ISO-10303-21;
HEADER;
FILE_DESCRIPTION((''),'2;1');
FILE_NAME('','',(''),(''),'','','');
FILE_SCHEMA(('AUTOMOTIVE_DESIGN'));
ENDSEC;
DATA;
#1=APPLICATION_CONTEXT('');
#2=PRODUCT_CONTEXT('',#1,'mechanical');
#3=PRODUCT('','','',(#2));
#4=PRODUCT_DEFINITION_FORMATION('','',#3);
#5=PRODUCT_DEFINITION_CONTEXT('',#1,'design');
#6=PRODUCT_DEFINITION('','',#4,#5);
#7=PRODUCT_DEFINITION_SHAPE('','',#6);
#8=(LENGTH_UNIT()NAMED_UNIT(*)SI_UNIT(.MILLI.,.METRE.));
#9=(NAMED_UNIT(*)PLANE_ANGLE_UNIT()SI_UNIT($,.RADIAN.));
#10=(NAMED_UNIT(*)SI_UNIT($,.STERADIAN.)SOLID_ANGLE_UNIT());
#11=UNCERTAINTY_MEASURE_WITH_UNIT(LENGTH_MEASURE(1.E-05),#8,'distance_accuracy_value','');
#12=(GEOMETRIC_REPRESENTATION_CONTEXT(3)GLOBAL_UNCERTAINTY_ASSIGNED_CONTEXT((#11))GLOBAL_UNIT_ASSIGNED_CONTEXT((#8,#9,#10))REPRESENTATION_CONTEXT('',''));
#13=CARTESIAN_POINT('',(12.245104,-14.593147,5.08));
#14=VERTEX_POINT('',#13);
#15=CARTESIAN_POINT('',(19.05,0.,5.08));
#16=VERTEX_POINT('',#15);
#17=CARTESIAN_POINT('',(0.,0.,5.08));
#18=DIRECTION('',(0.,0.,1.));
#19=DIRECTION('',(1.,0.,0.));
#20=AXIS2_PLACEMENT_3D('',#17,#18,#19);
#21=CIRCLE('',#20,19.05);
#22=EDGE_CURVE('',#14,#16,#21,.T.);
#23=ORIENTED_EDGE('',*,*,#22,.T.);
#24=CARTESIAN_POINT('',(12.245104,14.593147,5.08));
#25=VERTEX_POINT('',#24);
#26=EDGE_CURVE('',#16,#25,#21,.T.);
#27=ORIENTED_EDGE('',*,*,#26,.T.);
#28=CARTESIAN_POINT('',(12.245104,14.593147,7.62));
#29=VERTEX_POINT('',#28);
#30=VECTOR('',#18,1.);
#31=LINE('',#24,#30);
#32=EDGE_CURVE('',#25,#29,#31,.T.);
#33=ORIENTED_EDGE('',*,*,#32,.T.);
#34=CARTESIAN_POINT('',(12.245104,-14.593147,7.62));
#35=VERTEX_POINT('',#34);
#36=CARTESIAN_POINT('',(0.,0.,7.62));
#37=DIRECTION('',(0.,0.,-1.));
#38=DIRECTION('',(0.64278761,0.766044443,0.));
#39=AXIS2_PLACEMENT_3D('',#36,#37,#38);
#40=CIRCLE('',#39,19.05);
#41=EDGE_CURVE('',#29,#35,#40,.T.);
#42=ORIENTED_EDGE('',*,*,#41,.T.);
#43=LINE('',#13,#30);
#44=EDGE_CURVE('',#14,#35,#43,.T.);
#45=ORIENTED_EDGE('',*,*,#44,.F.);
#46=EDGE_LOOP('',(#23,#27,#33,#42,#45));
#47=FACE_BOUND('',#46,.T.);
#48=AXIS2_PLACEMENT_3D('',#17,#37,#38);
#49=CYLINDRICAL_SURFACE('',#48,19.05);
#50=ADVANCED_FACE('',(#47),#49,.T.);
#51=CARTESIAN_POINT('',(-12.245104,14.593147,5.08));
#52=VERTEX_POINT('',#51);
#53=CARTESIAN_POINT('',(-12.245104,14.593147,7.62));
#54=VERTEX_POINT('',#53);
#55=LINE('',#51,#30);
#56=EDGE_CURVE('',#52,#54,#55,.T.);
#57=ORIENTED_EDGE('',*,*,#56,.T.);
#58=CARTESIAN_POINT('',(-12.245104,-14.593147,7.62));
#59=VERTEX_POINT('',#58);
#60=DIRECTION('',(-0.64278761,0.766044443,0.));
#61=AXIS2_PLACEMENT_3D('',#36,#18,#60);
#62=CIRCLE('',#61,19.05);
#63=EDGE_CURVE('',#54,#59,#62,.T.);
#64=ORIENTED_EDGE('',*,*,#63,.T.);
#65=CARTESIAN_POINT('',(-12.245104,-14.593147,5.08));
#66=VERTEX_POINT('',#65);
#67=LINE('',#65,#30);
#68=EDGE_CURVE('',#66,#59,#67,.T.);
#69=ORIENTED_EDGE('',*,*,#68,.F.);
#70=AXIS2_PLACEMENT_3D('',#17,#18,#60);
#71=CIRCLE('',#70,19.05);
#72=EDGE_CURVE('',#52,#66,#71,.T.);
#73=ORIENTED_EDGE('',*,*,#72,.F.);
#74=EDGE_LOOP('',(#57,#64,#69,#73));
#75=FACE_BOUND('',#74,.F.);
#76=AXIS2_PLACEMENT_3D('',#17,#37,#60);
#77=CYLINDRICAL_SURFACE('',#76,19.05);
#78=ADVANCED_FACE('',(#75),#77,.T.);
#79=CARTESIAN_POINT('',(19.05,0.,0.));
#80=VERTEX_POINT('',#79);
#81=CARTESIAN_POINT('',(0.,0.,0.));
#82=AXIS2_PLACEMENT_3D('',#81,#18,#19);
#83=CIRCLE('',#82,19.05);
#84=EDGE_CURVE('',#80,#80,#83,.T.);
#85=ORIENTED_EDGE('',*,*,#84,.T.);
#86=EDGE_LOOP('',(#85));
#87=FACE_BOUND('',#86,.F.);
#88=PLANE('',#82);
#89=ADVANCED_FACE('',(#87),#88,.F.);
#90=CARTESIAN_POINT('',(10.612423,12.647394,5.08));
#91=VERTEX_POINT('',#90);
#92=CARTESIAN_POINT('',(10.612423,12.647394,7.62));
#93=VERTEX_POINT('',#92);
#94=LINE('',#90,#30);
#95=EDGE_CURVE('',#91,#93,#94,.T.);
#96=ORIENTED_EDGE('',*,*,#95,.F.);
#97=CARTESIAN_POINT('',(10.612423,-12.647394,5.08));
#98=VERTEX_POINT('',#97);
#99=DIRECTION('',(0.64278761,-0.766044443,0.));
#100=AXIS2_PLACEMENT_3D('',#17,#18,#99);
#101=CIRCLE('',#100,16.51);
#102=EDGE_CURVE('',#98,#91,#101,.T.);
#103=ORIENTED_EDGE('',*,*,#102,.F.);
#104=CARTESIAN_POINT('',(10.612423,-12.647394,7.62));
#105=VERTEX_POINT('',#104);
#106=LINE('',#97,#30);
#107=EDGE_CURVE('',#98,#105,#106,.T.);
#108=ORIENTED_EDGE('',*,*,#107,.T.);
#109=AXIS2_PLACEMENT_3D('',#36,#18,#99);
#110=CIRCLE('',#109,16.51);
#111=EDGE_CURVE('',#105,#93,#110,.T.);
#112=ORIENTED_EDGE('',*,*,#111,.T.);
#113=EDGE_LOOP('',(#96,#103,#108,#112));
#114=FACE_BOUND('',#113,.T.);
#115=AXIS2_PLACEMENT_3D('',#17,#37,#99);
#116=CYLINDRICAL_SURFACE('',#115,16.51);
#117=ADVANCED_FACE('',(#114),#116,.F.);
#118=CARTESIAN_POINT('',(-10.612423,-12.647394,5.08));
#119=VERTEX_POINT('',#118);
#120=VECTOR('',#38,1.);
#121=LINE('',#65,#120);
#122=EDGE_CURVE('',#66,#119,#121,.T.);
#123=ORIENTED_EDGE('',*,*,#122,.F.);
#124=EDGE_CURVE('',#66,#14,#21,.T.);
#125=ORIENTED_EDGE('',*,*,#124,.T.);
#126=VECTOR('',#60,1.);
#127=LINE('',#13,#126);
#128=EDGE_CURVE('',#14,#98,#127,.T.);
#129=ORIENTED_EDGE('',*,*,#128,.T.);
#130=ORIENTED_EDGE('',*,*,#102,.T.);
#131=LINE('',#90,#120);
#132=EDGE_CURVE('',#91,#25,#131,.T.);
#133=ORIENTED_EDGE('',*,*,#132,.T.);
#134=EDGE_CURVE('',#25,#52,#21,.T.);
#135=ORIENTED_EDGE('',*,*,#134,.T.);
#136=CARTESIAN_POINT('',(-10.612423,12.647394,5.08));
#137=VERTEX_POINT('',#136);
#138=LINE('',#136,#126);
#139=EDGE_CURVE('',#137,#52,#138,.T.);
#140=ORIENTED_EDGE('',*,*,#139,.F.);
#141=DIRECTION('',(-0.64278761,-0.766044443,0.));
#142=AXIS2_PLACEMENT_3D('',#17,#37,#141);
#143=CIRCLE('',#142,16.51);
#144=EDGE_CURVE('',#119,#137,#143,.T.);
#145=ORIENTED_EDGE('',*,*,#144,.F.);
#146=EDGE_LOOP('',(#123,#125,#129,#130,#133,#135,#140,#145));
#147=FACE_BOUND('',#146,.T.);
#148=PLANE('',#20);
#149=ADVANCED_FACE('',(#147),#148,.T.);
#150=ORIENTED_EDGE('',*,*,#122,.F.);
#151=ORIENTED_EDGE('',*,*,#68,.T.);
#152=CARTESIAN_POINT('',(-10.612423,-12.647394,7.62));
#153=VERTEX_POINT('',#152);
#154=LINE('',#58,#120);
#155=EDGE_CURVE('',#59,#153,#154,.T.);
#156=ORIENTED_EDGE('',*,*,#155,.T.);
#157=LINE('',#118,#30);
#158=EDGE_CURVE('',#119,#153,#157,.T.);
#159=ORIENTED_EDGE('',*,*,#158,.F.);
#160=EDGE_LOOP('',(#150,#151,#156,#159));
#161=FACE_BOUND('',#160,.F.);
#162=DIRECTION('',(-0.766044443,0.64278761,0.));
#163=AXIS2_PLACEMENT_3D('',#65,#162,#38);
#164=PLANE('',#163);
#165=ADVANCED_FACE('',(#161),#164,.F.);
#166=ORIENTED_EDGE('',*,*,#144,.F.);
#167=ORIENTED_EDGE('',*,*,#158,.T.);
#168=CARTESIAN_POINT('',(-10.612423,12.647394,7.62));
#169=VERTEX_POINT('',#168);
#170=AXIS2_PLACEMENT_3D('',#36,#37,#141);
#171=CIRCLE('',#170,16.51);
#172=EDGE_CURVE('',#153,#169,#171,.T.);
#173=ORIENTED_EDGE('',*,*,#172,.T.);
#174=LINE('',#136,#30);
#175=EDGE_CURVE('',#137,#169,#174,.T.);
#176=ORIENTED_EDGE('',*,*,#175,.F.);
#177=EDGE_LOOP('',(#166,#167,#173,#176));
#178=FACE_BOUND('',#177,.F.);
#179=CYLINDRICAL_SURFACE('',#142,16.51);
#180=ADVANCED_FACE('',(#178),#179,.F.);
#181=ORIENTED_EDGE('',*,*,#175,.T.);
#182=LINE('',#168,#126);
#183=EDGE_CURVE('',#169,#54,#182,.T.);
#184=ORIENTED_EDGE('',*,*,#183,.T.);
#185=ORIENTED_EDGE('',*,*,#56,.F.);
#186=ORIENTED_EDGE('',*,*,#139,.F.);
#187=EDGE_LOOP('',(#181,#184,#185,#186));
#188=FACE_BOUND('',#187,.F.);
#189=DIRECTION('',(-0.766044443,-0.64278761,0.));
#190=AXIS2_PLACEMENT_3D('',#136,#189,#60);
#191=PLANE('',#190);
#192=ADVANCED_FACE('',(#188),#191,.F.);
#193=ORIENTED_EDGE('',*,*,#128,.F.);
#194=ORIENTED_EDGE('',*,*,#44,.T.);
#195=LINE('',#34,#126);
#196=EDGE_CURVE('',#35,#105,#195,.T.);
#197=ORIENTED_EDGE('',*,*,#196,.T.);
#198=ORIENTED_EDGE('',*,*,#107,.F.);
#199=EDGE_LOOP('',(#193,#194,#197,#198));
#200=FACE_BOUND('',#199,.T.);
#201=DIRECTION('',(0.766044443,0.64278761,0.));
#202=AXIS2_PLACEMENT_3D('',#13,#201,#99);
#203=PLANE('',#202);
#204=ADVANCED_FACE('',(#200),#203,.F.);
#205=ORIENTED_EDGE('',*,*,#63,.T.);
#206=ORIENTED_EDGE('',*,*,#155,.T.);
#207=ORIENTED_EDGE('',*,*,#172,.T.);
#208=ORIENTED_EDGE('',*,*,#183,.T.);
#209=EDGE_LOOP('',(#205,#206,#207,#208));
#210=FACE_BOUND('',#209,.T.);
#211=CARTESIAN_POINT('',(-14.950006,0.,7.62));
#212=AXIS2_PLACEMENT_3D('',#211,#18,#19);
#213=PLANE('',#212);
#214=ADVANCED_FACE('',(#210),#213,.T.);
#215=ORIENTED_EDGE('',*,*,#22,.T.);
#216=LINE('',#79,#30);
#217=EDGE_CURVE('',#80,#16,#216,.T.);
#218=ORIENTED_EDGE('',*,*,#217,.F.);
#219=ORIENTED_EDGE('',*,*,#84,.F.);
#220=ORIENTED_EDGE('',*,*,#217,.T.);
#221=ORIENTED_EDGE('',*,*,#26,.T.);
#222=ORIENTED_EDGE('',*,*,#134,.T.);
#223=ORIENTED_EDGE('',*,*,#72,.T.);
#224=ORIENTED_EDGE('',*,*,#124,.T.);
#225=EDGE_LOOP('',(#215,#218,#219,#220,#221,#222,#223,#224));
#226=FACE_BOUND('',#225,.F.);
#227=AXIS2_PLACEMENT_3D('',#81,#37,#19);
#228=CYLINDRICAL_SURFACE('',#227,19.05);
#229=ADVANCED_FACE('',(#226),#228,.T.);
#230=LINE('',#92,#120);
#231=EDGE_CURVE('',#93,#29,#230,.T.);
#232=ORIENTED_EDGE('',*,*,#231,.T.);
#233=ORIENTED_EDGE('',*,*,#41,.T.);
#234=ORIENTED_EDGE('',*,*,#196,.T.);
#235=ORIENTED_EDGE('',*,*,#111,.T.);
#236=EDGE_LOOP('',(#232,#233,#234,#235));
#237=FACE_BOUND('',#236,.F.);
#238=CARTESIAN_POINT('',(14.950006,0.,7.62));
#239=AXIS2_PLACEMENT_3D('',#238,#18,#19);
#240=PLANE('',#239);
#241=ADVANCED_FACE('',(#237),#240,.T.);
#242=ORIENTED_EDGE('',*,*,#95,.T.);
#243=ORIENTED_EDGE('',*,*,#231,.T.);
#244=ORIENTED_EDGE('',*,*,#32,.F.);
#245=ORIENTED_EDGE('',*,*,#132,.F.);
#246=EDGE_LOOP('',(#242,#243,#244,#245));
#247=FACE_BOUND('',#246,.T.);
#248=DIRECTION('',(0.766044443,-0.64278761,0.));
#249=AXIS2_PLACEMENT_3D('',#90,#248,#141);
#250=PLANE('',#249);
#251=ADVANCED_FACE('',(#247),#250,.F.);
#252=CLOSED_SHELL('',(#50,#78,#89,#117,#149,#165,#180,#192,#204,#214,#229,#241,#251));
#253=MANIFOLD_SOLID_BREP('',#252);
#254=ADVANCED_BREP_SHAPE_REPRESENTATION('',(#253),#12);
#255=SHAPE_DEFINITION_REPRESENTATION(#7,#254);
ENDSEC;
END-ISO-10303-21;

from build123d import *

# Parameters (mm, degrees)
F0_R     = 19.05
F1_DEPTH = 5.08
F3_DEPTH = 2.54


# Not quite as in the source:
# - a pattern or mirror of a feature is missing from the dataset's text; its kind, count and spacing are read off the source's solid


with BuildPart() as f1:
    # F0 (on Top) → F1 (new body)
    with BuildSketch(Plane.XY):
        Circle(F0_R)
    extrude(amount=F1_DEPTH)

    # F2 (on face) → F3 (join)
    with BuildSketch(Plane.XY.offset(5.08)):
        with BuildLine():
            ThreePointArc((-10.6124234359, -12.6473937559), (-16.51, 0), (-10.6124234359, 12.6473937559))
            Line((-10.6124234359, 12.6473937559), (-12.2451039645, 14.5931466414))
            ThreePointArc((-12.2451039645, 14.5931466414), (-19.05, 0), (-12.2451039645, -14.5931466414))
            Line((-12.2451039645, -14.5931466414), (-10.6124234359, -12.6473937559))
        make_face()
    f3 = extrude(amount=F3_DEPTH)

    # F3_copies: F3 across plane
    add(f3.mirror(Plane(origin=(0, 0, 0), x_dir=(0, 0, 1), z_dir=(1, 0, 0))))


solid = f1.part
